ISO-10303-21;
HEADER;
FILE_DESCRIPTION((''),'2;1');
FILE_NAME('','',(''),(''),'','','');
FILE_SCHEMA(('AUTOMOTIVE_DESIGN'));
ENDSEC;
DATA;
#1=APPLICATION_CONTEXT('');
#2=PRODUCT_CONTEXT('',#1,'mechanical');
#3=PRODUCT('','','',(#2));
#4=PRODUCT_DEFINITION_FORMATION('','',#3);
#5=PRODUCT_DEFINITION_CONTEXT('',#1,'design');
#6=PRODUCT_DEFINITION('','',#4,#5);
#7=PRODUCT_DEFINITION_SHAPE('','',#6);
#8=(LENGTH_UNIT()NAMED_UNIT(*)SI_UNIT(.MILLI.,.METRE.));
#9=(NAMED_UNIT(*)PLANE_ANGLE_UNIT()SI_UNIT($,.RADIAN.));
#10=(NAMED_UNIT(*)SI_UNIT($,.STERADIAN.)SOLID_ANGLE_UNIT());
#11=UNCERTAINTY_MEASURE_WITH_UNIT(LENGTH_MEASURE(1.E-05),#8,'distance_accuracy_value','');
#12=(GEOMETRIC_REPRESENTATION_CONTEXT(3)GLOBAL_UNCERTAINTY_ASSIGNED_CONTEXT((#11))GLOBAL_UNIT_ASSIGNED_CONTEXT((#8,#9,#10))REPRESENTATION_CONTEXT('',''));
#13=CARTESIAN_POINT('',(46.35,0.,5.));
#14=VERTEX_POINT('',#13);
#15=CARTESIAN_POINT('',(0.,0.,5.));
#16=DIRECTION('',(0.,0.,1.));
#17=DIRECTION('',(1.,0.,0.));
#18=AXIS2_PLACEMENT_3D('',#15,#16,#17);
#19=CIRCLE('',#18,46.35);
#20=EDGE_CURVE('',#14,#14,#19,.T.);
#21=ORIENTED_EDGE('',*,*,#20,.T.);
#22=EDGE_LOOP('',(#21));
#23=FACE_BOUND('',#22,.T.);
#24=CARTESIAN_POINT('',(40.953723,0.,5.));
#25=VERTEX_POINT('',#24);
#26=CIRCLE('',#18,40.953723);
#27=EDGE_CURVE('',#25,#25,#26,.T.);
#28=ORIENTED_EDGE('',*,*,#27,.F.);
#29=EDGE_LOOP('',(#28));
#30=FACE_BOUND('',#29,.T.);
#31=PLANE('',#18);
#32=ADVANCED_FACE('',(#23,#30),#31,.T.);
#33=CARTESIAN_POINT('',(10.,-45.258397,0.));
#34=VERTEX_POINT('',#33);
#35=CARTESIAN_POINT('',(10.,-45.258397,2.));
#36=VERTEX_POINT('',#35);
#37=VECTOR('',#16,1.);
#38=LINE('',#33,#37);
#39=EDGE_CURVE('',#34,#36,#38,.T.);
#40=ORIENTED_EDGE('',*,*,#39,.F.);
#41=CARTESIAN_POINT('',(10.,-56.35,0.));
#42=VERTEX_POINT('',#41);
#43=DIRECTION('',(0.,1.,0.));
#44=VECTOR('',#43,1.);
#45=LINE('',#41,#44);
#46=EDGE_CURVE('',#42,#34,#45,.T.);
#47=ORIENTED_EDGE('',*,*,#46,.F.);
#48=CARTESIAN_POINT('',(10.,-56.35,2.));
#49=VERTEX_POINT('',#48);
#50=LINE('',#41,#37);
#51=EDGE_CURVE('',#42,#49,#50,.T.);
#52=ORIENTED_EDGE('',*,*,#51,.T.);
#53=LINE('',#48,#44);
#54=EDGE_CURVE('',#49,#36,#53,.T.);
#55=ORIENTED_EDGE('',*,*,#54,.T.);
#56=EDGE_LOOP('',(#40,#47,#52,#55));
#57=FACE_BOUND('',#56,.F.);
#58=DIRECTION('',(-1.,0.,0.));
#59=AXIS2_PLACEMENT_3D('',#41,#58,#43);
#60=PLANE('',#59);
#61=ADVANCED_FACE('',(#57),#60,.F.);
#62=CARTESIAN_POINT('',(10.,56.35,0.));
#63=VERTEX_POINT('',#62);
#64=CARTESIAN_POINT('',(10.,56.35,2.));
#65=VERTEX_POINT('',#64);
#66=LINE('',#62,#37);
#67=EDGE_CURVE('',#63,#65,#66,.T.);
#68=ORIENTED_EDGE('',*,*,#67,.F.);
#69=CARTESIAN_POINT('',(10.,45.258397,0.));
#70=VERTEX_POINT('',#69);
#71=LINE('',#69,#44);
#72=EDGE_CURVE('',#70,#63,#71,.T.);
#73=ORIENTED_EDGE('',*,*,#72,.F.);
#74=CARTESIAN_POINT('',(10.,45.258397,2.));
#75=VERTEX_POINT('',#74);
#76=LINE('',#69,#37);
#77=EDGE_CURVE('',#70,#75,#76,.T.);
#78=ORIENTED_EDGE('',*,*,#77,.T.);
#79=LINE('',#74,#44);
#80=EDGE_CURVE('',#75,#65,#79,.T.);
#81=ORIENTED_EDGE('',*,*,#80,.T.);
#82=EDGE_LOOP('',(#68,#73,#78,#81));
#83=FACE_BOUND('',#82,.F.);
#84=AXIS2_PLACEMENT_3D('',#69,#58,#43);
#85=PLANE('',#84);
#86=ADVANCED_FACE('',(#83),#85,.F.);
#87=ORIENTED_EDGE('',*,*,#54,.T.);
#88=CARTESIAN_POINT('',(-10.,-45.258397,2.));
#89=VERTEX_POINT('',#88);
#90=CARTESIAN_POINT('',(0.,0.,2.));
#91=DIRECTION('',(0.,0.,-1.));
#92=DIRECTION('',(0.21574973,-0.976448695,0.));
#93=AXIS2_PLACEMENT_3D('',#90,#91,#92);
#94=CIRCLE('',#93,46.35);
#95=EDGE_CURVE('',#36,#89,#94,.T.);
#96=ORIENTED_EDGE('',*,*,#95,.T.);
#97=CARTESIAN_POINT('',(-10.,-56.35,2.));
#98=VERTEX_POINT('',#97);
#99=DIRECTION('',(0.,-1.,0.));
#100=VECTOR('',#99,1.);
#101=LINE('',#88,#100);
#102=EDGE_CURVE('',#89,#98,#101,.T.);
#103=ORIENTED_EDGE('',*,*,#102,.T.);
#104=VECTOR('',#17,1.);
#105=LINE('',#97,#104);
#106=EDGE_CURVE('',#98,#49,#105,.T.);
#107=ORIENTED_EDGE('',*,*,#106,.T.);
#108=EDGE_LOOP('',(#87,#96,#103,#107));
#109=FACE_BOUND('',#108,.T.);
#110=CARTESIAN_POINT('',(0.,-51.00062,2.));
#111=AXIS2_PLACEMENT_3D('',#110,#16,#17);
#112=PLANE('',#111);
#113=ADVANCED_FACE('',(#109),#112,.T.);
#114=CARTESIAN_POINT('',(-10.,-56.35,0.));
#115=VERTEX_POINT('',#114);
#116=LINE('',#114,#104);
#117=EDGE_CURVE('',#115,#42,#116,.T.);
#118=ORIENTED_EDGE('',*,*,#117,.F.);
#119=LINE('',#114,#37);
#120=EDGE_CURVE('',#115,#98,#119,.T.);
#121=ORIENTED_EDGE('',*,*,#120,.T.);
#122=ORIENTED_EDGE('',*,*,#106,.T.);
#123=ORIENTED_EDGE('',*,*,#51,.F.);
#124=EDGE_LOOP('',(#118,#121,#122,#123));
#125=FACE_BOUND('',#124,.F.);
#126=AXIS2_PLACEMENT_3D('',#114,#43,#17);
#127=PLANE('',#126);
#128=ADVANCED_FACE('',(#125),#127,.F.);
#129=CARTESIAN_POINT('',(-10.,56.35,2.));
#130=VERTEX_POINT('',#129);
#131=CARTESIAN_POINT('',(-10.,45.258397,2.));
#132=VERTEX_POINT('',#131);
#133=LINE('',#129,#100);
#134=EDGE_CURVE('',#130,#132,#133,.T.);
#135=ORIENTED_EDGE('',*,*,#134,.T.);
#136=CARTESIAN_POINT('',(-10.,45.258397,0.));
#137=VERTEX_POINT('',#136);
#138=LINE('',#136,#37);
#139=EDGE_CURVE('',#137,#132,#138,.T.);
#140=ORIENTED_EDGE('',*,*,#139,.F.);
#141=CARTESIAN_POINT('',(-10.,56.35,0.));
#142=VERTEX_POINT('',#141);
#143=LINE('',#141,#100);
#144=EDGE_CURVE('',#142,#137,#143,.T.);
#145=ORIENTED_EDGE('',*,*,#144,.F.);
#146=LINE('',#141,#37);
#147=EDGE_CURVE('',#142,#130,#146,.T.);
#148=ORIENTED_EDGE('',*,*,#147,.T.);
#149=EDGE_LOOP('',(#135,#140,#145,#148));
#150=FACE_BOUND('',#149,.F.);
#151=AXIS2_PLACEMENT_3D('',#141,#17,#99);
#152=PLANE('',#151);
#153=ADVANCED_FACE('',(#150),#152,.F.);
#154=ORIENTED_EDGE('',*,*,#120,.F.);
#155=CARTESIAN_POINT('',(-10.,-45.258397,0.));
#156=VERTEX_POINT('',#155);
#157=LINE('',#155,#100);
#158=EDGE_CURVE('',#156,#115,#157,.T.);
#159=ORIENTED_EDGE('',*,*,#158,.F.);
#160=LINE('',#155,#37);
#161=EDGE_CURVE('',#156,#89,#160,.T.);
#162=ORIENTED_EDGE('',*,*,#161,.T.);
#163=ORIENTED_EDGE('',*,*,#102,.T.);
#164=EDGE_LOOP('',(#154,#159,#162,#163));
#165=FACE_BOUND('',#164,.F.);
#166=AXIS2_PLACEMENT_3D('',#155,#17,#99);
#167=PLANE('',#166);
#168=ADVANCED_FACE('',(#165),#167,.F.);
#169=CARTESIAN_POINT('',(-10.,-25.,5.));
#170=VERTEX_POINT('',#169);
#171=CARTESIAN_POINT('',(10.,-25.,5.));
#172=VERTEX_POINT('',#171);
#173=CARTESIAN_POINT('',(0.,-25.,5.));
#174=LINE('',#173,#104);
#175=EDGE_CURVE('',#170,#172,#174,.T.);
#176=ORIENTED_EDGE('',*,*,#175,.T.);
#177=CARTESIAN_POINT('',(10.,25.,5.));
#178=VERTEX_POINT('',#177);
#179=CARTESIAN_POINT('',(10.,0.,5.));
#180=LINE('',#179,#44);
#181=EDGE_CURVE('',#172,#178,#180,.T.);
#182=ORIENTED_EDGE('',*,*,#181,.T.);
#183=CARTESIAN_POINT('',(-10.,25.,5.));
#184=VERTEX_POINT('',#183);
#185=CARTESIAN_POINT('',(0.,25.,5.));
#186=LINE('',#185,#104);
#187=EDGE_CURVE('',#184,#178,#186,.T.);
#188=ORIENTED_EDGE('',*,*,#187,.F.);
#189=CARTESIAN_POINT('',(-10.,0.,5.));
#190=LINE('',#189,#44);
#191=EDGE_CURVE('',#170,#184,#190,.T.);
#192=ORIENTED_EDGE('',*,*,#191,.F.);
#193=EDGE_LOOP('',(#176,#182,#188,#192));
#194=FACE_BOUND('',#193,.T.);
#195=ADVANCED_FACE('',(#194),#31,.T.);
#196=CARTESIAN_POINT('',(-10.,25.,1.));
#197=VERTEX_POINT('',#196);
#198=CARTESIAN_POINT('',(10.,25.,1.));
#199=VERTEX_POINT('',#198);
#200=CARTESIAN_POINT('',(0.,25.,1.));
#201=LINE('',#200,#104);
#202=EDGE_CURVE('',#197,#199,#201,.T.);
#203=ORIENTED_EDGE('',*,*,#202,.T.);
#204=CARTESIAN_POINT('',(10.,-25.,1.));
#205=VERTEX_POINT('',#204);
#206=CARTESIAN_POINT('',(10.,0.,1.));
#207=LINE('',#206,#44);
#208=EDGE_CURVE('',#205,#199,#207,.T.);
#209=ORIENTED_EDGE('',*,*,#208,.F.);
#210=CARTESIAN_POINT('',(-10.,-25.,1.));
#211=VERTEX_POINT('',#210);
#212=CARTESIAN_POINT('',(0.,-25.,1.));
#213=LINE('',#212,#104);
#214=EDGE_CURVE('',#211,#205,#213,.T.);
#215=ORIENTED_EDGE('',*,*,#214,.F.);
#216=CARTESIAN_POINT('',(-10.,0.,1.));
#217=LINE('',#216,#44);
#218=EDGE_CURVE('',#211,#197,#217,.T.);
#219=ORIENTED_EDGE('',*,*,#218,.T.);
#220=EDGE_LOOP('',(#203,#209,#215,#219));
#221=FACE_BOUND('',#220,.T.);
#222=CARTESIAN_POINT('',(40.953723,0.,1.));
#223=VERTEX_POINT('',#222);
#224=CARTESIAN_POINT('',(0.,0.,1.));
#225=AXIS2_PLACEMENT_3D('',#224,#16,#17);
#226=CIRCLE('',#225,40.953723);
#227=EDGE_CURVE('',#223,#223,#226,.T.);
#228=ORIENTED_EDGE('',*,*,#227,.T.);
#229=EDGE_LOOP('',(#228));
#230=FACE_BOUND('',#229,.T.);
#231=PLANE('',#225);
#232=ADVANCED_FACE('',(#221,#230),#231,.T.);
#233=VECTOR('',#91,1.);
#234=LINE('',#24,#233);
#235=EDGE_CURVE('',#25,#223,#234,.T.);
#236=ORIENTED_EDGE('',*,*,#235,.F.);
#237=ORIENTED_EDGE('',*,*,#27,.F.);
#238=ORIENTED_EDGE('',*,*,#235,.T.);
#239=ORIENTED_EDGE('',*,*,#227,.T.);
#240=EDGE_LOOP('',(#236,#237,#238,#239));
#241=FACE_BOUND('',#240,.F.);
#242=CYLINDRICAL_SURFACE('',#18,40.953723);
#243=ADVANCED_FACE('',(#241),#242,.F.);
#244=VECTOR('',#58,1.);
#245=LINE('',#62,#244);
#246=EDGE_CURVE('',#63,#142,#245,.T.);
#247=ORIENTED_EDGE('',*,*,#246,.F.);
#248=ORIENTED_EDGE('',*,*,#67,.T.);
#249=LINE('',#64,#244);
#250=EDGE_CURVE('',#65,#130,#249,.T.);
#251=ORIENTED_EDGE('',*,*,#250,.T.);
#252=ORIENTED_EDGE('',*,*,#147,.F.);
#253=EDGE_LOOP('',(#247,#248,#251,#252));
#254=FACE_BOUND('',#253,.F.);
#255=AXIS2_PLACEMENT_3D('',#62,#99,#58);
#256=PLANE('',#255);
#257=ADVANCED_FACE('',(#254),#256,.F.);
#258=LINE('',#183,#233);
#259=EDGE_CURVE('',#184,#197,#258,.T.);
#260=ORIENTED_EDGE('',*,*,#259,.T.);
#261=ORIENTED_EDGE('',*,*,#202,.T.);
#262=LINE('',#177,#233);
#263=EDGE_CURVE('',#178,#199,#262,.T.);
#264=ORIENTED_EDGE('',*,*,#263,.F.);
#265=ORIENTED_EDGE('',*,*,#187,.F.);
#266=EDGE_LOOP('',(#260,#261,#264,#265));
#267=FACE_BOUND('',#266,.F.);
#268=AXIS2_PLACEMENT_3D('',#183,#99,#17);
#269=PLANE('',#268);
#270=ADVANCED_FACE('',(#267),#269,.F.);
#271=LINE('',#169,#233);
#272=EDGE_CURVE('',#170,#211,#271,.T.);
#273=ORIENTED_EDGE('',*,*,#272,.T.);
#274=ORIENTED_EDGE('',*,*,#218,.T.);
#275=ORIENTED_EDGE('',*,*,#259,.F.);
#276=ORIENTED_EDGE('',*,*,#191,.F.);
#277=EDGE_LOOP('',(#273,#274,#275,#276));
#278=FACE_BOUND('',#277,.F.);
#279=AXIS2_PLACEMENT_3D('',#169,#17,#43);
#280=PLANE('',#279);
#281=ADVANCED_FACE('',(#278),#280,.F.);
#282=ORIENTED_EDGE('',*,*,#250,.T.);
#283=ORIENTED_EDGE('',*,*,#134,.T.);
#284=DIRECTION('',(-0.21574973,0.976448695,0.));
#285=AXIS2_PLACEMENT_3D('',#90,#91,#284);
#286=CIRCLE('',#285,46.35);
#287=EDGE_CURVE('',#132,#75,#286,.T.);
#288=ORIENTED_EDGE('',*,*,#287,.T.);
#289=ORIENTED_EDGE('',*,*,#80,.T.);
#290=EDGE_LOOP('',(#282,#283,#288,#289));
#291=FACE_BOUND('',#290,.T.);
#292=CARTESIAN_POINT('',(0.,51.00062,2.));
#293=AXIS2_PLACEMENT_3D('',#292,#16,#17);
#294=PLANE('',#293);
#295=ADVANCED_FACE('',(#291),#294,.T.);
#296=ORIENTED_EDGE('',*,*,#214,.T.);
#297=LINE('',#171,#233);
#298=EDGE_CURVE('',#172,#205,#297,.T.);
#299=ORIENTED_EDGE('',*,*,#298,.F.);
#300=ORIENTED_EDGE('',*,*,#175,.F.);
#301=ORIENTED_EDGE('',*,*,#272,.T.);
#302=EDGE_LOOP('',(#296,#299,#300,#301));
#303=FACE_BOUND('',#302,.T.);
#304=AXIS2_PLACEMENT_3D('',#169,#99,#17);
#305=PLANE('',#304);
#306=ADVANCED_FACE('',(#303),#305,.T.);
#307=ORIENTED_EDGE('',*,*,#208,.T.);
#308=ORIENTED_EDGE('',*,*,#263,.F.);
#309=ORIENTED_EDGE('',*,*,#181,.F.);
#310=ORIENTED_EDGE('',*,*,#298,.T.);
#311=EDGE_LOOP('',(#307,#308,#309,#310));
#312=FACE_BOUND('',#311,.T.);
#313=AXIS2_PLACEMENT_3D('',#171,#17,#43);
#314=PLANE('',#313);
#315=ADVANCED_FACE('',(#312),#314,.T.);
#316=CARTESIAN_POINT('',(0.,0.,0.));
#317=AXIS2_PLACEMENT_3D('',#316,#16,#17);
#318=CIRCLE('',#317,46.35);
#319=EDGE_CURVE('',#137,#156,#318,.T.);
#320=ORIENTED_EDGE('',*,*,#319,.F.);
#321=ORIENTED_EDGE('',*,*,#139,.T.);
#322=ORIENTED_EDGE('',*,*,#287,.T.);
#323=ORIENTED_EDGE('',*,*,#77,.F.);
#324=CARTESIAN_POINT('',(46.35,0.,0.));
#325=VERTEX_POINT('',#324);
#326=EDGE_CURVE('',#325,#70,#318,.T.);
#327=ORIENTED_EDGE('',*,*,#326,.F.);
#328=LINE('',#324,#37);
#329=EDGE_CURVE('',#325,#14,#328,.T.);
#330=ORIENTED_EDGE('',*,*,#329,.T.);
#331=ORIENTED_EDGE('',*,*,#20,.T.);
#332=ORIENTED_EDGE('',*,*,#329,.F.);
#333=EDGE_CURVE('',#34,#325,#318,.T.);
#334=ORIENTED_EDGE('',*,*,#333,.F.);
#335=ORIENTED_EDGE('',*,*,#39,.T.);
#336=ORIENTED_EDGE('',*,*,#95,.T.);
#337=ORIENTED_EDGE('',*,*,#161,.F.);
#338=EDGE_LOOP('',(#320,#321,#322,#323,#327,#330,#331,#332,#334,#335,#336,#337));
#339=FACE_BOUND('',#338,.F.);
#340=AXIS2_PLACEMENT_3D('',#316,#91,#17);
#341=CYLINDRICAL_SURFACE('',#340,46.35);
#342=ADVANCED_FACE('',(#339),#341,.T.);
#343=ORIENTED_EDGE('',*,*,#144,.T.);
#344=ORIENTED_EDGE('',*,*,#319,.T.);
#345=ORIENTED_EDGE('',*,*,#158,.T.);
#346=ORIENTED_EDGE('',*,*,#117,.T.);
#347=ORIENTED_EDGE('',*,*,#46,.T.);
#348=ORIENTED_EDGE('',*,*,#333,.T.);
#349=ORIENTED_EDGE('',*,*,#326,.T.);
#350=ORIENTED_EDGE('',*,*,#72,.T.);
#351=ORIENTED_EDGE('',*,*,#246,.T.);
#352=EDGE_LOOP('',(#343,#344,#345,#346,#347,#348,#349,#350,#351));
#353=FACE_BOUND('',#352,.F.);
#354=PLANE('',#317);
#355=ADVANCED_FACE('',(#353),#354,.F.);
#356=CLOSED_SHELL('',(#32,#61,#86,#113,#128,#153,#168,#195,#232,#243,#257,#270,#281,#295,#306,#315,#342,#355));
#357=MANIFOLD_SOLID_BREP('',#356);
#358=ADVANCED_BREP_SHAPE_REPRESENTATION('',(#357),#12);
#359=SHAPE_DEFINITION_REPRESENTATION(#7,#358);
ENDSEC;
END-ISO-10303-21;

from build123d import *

# Parameters (mm, degrees)
F0_R     = 46.35
F1_DEPTH = 5
F2_R     = 40.9537225283
F2_W     = 20
F2_H     = 50
F3_DEPTH = 4
F5_DEPTH = 2
F6_DEPTH = 2


# Not quite as in the source:
# - a feature names something its author has since deleted; it is built from what else it names


with BuildPart() as f1:
    # F0 (on Top) → F1 (new body)
    with BuildSketch(Plane.XY):
        Circle(F0_R)
    extrude(amount=F1_DEPTH)

    # F2 (on face) → F3 (cut)
    with BuildSketch(Plane.XY.offset(5)):
        Circle(F2_R)
        Rectangle(F2_W, F2_H, mode=Mode.SUBTRACT)
    extrude(amount=-F3_DEPTH, mode=Mode.SUBTRACT)

    # F4 (on face) → F5 (join)
    with BuildSketch(Plane.XY):
        with BuildLine():
            Line((10, 45.2583970109), (10, 56.35))
            Line((10, 56.35), (0, 56.35))
            Line((0, 56.35), (-10, 56.35))
            Line((-10, 56.35), (-10, 45.2583970109))
            ThreePointArc((-10, 45.2583970109), (0, 46.35), (10, 45.2583970109))
        make_face()
    extrude(amount=F5_DEPTH)

    # F4 (on face) → F6 (join)
    with BuildSketch(Plane.XY):
        with BuildLine():
            Line((10, -56.35), (10, -45.2583970109))
            ThreePointArc((10, -45.2583970109), (0, -46.35), (-10, -45.2583970109))
            Line((-10, -45.2583970109), (-10, -56.35))
            Line((-10, -56.35), (10, -56.35))
        make_face()
    extrude(amount=F6_DEPTH)


solid = f1.part
